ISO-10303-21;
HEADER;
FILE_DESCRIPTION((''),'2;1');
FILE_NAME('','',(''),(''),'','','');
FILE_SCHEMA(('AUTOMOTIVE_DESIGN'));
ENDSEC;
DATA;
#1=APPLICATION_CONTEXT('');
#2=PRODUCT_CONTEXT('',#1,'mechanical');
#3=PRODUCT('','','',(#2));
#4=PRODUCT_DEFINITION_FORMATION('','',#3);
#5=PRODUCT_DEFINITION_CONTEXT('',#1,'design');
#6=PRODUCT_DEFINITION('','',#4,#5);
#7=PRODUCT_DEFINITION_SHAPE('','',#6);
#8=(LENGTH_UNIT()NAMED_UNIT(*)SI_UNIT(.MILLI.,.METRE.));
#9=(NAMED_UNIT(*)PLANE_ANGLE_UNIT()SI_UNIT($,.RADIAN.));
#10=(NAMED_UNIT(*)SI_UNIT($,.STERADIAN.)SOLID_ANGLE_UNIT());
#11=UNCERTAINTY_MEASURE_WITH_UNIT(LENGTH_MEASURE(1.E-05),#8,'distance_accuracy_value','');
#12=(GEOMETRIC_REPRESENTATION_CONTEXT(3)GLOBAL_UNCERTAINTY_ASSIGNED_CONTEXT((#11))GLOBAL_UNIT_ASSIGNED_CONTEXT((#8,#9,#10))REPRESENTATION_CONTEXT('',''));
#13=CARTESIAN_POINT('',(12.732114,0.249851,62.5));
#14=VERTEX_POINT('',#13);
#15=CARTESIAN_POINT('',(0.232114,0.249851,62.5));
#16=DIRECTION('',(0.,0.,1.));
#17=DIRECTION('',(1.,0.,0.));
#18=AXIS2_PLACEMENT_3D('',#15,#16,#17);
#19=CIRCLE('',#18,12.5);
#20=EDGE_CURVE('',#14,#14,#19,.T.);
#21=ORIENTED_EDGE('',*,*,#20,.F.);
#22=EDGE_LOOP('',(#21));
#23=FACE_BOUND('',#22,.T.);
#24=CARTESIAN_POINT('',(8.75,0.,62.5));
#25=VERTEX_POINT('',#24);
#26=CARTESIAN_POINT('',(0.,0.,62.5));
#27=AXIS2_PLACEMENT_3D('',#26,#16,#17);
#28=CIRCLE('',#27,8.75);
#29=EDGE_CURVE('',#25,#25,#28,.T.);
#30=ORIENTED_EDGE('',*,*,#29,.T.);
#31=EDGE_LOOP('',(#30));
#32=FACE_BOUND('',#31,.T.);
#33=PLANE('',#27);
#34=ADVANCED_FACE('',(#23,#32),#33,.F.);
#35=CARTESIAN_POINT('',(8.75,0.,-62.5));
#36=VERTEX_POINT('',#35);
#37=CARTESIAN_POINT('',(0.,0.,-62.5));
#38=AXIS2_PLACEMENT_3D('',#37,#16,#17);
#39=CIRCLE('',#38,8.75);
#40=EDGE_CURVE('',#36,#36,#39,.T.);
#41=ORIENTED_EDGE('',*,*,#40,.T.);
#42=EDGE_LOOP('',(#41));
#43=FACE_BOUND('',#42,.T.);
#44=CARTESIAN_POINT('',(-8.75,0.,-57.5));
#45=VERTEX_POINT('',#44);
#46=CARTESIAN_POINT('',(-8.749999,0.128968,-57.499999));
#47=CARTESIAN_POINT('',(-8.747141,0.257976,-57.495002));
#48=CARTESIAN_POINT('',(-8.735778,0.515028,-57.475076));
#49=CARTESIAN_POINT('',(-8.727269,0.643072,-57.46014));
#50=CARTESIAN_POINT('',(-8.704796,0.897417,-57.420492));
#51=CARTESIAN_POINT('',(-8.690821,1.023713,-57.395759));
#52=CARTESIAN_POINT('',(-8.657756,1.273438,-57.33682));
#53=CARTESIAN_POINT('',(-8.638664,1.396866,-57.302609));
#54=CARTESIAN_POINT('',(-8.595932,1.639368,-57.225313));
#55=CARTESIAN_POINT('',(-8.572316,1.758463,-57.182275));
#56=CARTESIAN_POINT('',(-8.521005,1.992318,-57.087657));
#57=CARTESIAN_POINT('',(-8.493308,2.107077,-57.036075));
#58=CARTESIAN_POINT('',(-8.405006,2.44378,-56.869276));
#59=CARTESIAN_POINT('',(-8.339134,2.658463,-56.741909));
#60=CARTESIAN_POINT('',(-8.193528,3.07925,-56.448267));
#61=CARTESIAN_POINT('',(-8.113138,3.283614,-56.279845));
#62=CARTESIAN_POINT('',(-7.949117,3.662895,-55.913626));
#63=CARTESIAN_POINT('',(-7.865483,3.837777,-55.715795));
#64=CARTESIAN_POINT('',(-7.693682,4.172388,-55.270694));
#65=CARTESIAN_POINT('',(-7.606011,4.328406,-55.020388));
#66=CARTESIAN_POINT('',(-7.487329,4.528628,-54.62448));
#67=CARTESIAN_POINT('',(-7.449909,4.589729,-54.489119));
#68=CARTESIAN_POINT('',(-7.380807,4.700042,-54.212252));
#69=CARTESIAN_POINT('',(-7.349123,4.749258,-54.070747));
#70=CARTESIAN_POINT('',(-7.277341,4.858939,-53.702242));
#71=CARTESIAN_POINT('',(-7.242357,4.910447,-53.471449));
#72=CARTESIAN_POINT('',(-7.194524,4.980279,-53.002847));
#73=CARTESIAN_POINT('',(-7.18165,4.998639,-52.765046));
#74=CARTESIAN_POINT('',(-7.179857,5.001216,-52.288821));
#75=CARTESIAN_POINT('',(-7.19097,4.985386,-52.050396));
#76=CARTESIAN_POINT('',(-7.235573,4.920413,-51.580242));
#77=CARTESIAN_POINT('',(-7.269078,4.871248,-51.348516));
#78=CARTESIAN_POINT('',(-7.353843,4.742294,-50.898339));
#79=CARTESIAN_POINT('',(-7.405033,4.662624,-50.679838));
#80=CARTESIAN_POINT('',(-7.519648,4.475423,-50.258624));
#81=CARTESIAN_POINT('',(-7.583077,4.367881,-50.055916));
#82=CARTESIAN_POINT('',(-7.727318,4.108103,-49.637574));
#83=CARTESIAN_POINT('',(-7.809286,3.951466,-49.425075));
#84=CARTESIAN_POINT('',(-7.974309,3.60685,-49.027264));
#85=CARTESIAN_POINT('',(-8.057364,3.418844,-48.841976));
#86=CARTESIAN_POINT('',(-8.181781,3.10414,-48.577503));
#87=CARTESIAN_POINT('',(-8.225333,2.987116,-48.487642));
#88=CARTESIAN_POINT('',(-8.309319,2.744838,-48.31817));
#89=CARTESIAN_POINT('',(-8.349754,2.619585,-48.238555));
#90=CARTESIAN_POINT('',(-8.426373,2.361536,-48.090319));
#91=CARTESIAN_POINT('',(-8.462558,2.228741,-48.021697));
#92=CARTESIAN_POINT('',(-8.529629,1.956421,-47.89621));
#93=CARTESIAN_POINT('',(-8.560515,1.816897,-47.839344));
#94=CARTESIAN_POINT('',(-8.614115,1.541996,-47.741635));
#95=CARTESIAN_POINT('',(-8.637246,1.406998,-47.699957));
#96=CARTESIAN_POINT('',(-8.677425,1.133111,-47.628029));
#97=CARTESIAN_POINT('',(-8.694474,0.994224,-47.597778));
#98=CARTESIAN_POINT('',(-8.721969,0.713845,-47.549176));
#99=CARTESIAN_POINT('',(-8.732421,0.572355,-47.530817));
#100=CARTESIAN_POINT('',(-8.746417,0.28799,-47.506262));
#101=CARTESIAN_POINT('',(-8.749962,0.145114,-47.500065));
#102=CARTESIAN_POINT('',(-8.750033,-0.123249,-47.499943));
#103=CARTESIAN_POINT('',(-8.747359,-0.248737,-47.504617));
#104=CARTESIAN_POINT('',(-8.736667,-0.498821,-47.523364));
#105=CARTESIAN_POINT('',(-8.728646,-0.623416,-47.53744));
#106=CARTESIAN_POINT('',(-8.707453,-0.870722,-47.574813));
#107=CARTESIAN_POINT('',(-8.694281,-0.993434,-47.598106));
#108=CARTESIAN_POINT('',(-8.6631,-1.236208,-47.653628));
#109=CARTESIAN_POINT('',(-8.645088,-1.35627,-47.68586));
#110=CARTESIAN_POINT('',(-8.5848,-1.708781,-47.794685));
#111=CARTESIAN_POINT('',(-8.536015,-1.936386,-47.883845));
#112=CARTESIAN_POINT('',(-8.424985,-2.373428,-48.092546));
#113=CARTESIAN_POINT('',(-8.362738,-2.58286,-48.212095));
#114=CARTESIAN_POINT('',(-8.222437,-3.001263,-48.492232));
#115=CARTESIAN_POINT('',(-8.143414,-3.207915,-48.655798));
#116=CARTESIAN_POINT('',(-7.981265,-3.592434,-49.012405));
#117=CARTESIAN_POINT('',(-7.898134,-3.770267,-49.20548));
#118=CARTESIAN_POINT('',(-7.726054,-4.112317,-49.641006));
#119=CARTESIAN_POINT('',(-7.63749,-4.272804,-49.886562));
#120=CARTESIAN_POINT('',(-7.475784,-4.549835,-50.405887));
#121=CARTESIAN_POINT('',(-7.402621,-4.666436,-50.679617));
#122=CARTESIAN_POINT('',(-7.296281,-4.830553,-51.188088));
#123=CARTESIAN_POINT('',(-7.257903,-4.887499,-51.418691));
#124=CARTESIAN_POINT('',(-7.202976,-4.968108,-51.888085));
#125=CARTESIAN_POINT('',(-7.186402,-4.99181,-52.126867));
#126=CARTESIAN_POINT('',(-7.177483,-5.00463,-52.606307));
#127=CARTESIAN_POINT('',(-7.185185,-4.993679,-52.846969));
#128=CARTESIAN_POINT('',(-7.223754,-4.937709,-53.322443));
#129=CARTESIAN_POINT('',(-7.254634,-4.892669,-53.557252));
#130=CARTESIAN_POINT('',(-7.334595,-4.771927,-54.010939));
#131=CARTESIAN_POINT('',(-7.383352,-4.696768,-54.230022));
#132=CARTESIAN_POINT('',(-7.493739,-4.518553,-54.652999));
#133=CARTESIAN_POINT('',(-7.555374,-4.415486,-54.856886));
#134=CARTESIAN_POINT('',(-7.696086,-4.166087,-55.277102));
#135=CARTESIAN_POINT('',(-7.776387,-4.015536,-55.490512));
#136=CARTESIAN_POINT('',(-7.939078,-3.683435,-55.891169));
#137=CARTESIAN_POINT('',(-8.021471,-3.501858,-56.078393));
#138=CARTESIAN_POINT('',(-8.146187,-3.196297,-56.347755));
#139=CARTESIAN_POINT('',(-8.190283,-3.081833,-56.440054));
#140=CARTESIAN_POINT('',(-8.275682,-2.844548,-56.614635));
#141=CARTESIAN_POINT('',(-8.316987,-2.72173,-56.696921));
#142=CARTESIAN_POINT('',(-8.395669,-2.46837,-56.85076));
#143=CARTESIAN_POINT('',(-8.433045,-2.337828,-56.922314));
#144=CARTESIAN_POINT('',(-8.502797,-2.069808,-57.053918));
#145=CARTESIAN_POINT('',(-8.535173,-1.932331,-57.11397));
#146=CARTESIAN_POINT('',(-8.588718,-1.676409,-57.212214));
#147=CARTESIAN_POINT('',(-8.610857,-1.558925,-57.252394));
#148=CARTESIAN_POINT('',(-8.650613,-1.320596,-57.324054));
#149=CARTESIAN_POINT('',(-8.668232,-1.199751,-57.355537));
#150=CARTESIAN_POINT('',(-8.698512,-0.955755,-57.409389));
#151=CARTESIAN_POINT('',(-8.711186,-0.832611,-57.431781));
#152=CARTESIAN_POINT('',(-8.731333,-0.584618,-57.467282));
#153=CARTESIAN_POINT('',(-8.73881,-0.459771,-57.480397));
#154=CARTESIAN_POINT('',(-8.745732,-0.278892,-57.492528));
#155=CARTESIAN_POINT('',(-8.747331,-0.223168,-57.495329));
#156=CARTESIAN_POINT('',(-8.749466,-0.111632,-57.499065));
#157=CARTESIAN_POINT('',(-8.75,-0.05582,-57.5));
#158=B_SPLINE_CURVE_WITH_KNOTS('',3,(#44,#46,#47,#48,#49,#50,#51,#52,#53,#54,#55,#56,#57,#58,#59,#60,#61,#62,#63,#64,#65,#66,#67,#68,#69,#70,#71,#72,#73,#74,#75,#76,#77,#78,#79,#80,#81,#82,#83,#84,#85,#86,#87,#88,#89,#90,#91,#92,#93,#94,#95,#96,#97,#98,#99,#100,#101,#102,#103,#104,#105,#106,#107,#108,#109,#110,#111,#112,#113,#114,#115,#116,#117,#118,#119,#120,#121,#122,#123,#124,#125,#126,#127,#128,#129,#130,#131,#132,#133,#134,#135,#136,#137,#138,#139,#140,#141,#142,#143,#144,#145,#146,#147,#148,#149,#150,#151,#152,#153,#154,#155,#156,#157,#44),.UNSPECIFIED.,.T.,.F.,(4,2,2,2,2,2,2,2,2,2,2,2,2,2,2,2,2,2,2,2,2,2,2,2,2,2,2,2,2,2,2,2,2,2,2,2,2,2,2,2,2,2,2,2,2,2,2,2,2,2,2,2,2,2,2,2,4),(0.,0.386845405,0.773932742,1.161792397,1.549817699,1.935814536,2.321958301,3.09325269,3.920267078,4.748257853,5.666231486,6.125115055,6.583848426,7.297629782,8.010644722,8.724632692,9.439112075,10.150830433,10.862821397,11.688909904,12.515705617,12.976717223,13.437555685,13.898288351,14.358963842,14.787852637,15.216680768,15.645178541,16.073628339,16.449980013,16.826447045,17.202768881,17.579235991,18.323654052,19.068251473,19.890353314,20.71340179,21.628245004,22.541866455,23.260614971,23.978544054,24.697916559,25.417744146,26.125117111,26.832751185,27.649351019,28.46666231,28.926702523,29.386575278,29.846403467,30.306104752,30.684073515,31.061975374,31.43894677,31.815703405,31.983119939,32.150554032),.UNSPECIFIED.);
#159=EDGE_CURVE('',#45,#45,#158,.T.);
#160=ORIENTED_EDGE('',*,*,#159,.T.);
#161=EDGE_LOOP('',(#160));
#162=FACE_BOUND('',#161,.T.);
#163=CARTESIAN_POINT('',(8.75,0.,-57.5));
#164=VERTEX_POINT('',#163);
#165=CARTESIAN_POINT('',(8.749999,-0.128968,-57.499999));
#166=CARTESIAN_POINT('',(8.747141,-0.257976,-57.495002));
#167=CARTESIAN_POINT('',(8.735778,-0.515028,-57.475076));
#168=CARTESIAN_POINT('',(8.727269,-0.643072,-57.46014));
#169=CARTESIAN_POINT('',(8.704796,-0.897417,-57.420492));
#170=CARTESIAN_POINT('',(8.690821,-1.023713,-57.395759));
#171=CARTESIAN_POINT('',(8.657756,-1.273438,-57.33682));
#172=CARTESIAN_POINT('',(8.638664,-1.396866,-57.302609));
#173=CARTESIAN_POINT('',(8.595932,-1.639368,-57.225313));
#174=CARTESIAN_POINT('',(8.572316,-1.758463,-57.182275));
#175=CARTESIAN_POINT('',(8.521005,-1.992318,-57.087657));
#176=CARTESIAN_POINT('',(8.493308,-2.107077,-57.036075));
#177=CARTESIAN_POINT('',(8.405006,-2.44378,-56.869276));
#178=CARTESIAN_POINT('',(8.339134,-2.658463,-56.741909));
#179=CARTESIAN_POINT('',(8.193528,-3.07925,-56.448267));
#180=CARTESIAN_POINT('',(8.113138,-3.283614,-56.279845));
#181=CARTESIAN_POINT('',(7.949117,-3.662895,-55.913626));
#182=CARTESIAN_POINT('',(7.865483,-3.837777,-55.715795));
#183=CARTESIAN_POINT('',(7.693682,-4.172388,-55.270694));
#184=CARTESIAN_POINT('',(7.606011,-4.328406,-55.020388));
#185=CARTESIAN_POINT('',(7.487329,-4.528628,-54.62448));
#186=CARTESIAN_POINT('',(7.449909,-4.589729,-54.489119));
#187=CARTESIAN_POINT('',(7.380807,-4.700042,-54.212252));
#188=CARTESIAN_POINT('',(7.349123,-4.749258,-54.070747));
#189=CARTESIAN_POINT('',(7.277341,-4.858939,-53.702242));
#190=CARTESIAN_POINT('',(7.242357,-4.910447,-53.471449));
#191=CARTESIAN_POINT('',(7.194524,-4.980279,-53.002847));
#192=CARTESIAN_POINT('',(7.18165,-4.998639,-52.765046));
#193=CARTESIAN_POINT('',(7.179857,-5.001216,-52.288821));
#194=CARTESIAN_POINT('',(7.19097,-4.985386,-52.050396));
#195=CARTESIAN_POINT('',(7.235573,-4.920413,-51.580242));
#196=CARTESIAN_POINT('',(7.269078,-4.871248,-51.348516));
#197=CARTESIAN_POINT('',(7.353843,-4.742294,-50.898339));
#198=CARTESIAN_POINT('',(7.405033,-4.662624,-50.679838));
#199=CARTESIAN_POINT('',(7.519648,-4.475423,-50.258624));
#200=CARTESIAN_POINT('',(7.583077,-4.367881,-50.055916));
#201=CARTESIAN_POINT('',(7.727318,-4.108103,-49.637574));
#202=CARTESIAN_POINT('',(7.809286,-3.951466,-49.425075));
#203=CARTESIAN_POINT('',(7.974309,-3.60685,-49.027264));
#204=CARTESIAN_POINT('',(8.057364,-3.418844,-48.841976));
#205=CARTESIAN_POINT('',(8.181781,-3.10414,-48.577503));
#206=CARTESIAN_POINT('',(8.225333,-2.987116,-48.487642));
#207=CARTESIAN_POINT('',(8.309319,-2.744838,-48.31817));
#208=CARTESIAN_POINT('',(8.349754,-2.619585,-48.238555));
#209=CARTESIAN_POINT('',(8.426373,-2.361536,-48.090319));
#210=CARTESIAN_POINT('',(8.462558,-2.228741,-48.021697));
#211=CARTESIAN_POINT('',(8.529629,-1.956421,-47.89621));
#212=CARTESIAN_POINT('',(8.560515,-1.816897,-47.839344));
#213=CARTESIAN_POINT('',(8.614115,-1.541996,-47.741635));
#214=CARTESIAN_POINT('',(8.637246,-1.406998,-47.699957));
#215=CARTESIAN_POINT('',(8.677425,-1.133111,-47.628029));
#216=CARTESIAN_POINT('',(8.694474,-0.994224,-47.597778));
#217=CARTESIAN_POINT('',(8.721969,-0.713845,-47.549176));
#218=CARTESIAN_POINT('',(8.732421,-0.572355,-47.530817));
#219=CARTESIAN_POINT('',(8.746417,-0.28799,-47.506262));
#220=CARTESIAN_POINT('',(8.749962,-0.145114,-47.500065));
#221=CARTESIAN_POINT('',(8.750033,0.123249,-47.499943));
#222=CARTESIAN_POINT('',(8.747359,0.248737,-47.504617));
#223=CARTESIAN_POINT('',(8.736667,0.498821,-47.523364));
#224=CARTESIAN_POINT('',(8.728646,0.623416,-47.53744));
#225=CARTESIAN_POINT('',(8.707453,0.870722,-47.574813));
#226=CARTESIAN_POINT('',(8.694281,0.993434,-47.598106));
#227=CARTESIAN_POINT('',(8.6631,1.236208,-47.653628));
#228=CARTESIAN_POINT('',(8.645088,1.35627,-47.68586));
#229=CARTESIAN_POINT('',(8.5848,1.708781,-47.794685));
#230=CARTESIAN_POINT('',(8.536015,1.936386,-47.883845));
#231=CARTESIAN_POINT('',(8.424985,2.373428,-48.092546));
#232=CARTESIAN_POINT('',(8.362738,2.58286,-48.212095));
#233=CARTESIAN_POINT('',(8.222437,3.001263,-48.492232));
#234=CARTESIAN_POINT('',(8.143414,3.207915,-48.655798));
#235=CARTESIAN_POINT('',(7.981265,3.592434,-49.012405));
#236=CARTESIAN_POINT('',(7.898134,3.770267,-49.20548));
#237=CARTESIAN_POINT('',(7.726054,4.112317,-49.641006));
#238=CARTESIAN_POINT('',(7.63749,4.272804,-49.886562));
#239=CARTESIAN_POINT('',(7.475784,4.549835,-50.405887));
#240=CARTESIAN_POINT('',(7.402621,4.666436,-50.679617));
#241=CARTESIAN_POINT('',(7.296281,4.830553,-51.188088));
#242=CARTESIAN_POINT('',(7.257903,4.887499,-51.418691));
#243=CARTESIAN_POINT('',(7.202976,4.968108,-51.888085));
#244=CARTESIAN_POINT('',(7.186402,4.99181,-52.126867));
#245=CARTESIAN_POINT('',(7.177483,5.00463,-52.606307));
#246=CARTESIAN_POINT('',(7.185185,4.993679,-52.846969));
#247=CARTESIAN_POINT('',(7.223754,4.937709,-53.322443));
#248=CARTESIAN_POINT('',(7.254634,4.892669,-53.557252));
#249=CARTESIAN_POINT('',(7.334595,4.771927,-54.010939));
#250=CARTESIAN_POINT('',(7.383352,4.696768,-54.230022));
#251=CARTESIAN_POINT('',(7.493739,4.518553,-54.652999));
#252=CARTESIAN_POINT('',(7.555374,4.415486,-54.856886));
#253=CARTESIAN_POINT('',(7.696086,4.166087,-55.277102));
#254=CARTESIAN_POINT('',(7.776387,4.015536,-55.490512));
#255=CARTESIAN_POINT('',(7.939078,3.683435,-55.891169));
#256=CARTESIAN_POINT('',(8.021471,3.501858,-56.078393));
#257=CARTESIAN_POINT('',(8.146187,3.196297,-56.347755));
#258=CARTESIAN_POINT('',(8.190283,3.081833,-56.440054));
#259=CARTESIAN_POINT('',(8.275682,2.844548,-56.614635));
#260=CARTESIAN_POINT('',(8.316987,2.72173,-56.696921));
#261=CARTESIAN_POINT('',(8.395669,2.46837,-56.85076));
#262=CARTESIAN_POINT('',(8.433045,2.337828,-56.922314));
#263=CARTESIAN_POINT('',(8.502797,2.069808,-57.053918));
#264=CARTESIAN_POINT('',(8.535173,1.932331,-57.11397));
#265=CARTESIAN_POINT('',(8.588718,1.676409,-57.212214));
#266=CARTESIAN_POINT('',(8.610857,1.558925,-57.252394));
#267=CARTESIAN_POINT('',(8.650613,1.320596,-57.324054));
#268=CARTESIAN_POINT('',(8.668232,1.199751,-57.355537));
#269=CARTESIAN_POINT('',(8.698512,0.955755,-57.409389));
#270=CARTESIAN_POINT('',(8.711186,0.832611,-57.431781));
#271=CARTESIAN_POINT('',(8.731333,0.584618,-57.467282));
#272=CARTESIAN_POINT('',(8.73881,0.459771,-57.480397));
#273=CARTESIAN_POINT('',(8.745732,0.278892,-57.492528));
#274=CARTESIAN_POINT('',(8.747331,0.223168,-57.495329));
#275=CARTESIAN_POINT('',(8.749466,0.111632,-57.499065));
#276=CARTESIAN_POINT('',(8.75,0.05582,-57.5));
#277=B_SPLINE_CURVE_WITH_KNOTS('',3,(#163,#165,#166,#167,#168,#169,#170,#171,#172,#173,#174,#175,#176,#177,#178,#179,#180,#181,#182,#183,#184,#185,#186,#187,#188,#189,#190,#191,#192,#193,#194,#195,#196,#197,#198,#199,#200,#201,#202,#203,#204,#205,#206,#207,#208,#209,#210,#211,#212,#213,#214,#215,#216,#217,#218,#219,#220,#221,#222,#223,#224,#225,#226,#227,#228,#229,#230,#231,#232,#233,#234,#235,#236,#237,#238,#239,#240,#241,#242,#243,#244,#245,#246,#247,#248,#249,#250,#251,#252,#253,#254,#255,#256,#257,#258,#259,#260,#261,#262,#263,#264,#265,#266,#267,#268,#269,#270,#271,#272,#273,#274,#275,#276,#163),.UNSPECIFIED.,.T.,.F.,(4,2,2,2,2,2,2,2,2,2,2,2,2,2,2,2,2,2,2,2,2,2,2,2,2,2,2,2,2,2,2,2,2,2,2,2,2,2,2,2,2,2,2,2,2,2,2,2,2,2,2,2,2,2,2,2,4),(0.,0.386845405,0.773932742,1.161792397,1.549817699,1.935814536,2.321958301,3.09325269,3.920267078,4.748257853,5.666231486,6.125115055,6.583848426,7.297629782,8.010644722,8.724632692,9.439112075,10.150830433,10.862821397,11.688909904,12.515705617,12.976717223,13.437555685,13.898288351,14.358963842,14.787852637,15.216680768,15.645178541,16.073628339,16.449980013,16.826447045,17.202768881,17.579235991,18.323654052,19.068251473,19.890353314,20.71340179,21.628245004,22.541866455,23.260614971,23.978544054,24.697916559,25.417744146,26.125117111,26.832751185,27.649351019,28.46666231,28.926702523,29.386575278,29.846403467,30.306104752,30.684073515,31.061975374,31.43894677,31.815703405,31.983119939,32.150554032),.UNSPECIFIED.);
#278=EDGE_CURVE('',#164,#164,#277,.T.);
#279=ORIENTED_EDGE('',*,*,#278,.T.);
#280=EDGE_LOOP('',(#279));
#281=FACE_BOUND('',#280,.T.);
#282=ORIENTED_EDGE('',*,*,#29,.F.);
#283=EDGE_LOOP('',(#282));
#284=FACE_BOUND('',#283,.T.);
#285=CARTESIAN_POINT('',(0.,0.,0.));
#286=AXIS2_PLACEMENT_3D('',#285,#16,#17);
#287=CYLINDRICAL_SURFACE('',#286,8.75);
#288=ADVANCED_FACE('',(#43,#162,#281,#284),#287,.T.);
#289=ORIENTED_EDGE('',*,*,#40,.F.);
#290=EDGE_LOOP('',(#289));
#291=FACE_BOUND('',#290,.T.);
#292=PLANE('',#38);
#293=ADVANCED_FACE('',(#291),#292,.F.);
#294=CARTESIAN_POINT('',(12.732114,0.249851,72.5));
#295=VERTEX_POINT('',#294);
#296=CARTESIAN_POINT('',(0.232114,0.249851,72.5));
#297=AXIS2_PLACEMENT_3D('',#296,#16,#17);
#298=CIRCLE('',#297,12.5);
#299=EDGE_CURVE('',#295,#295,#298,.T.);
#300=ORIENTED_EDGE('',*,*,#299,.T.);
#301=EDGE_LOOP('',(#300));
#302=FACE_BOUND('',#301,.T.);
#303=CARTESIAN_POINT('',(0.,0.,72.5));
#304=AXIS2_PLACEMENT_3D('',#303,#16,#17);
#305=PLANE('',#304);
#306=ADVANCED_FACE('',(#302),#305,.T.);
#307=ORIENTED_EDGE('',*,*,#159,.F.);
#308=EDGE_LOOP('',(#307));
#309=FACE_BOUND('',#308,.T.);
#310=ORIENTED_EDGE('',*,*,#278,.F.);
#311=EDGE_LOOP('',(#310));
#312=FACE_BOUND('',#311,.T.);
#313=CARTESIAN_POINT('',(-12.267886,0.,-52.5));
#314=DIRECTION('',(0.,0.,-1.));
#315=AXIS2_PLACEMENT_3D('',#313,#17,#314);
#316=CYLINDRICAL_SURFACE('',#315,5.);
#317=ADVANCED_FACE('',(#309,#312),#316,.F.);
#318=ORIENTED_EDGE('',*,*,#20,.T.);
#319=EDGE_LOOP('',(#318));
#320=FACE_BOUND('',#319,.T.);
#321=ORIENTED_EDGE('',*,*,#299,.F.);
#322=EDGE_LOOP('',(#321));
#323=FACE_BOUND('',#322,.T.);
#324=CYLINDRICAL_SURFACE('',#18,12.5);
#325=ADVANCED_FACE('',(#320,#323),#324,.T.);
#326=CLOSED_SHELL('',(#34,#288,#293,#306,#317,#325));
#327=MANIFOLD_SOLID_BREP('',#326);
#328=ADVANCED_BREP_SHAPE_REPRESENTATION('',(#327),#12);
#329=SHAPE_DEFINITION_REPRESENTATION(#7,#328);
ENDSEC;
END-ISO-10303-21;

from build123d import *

# Parameters (mm, degrees)
SKETCH1_W               = 125
SKETCH1_H               = 8.75
BOSS_EXTRUDE1_START     = 62.5
BOSS_EXTRUDE1_OUTLINE_R = 12.5
BOSS_EXTRUDE1_DEPTH     = 10
CUT_EXTRUDE1_DEPTH      = 75.705524807
CUT_EXTRUDE1_DEPTH_BACK = 75.705524807
SKETCH2_R               = 5


# Read off the part's stored shape, not the designer's step: Boss-Extrude1
with BuildPart() as part:
    # Sketch1 → Revolve1 (revolve)
    with BuildSketch(Plane(origin=(0, 0, 0), x_dir=(0, 0, -1), z_dir=(1, 0, 0)), mode=Mode.PRIVATE) as revolve1_sk:
        with Locations((0, 4.375)):
            Rectangle(SKETCH1_W, SKETCH1_H)
    revolve(revolve1_sk.sketch.rotate(Axis((0, 0, 0), (0, 0, -1)), 90), axis=Axis((0, 0, 0), (0, 0, -1)))

    # Boss-Extrude1 outline → Boss-Extrude1 (add)
    with BuildSketch(Plane.XY.offset(BOSS_EXTRUDE1_START)):
        with Locations((0.232114028, 0.249851338)):
            Circle(BOSS_EXTRUDE1_OUTLINE_R)
    extrude(amount=BOSS_EXTRUDE1_DEPTH)

    # Sketch2 → Cut-Extrude1 (cut, two sides: drawn at the far end of the back side and taken through both)
    with BuildSketch(Plane(origin=(0, 0, 0), x_dir=(0, 0, -1), z_dir=(1, 0, 0)).offset(-CUT_EXTRUDE1_DEPTH_BACK)):
        with Locations((52.5, 0)):
            Circle(SKETCH2_R)
    extrude(amount=CUT_EXTRUDE1_DEPTH + CUT_EXTRUDE1_DEPTH_BACK, mode=Mode.SUBTRACT)


solid = part.part
